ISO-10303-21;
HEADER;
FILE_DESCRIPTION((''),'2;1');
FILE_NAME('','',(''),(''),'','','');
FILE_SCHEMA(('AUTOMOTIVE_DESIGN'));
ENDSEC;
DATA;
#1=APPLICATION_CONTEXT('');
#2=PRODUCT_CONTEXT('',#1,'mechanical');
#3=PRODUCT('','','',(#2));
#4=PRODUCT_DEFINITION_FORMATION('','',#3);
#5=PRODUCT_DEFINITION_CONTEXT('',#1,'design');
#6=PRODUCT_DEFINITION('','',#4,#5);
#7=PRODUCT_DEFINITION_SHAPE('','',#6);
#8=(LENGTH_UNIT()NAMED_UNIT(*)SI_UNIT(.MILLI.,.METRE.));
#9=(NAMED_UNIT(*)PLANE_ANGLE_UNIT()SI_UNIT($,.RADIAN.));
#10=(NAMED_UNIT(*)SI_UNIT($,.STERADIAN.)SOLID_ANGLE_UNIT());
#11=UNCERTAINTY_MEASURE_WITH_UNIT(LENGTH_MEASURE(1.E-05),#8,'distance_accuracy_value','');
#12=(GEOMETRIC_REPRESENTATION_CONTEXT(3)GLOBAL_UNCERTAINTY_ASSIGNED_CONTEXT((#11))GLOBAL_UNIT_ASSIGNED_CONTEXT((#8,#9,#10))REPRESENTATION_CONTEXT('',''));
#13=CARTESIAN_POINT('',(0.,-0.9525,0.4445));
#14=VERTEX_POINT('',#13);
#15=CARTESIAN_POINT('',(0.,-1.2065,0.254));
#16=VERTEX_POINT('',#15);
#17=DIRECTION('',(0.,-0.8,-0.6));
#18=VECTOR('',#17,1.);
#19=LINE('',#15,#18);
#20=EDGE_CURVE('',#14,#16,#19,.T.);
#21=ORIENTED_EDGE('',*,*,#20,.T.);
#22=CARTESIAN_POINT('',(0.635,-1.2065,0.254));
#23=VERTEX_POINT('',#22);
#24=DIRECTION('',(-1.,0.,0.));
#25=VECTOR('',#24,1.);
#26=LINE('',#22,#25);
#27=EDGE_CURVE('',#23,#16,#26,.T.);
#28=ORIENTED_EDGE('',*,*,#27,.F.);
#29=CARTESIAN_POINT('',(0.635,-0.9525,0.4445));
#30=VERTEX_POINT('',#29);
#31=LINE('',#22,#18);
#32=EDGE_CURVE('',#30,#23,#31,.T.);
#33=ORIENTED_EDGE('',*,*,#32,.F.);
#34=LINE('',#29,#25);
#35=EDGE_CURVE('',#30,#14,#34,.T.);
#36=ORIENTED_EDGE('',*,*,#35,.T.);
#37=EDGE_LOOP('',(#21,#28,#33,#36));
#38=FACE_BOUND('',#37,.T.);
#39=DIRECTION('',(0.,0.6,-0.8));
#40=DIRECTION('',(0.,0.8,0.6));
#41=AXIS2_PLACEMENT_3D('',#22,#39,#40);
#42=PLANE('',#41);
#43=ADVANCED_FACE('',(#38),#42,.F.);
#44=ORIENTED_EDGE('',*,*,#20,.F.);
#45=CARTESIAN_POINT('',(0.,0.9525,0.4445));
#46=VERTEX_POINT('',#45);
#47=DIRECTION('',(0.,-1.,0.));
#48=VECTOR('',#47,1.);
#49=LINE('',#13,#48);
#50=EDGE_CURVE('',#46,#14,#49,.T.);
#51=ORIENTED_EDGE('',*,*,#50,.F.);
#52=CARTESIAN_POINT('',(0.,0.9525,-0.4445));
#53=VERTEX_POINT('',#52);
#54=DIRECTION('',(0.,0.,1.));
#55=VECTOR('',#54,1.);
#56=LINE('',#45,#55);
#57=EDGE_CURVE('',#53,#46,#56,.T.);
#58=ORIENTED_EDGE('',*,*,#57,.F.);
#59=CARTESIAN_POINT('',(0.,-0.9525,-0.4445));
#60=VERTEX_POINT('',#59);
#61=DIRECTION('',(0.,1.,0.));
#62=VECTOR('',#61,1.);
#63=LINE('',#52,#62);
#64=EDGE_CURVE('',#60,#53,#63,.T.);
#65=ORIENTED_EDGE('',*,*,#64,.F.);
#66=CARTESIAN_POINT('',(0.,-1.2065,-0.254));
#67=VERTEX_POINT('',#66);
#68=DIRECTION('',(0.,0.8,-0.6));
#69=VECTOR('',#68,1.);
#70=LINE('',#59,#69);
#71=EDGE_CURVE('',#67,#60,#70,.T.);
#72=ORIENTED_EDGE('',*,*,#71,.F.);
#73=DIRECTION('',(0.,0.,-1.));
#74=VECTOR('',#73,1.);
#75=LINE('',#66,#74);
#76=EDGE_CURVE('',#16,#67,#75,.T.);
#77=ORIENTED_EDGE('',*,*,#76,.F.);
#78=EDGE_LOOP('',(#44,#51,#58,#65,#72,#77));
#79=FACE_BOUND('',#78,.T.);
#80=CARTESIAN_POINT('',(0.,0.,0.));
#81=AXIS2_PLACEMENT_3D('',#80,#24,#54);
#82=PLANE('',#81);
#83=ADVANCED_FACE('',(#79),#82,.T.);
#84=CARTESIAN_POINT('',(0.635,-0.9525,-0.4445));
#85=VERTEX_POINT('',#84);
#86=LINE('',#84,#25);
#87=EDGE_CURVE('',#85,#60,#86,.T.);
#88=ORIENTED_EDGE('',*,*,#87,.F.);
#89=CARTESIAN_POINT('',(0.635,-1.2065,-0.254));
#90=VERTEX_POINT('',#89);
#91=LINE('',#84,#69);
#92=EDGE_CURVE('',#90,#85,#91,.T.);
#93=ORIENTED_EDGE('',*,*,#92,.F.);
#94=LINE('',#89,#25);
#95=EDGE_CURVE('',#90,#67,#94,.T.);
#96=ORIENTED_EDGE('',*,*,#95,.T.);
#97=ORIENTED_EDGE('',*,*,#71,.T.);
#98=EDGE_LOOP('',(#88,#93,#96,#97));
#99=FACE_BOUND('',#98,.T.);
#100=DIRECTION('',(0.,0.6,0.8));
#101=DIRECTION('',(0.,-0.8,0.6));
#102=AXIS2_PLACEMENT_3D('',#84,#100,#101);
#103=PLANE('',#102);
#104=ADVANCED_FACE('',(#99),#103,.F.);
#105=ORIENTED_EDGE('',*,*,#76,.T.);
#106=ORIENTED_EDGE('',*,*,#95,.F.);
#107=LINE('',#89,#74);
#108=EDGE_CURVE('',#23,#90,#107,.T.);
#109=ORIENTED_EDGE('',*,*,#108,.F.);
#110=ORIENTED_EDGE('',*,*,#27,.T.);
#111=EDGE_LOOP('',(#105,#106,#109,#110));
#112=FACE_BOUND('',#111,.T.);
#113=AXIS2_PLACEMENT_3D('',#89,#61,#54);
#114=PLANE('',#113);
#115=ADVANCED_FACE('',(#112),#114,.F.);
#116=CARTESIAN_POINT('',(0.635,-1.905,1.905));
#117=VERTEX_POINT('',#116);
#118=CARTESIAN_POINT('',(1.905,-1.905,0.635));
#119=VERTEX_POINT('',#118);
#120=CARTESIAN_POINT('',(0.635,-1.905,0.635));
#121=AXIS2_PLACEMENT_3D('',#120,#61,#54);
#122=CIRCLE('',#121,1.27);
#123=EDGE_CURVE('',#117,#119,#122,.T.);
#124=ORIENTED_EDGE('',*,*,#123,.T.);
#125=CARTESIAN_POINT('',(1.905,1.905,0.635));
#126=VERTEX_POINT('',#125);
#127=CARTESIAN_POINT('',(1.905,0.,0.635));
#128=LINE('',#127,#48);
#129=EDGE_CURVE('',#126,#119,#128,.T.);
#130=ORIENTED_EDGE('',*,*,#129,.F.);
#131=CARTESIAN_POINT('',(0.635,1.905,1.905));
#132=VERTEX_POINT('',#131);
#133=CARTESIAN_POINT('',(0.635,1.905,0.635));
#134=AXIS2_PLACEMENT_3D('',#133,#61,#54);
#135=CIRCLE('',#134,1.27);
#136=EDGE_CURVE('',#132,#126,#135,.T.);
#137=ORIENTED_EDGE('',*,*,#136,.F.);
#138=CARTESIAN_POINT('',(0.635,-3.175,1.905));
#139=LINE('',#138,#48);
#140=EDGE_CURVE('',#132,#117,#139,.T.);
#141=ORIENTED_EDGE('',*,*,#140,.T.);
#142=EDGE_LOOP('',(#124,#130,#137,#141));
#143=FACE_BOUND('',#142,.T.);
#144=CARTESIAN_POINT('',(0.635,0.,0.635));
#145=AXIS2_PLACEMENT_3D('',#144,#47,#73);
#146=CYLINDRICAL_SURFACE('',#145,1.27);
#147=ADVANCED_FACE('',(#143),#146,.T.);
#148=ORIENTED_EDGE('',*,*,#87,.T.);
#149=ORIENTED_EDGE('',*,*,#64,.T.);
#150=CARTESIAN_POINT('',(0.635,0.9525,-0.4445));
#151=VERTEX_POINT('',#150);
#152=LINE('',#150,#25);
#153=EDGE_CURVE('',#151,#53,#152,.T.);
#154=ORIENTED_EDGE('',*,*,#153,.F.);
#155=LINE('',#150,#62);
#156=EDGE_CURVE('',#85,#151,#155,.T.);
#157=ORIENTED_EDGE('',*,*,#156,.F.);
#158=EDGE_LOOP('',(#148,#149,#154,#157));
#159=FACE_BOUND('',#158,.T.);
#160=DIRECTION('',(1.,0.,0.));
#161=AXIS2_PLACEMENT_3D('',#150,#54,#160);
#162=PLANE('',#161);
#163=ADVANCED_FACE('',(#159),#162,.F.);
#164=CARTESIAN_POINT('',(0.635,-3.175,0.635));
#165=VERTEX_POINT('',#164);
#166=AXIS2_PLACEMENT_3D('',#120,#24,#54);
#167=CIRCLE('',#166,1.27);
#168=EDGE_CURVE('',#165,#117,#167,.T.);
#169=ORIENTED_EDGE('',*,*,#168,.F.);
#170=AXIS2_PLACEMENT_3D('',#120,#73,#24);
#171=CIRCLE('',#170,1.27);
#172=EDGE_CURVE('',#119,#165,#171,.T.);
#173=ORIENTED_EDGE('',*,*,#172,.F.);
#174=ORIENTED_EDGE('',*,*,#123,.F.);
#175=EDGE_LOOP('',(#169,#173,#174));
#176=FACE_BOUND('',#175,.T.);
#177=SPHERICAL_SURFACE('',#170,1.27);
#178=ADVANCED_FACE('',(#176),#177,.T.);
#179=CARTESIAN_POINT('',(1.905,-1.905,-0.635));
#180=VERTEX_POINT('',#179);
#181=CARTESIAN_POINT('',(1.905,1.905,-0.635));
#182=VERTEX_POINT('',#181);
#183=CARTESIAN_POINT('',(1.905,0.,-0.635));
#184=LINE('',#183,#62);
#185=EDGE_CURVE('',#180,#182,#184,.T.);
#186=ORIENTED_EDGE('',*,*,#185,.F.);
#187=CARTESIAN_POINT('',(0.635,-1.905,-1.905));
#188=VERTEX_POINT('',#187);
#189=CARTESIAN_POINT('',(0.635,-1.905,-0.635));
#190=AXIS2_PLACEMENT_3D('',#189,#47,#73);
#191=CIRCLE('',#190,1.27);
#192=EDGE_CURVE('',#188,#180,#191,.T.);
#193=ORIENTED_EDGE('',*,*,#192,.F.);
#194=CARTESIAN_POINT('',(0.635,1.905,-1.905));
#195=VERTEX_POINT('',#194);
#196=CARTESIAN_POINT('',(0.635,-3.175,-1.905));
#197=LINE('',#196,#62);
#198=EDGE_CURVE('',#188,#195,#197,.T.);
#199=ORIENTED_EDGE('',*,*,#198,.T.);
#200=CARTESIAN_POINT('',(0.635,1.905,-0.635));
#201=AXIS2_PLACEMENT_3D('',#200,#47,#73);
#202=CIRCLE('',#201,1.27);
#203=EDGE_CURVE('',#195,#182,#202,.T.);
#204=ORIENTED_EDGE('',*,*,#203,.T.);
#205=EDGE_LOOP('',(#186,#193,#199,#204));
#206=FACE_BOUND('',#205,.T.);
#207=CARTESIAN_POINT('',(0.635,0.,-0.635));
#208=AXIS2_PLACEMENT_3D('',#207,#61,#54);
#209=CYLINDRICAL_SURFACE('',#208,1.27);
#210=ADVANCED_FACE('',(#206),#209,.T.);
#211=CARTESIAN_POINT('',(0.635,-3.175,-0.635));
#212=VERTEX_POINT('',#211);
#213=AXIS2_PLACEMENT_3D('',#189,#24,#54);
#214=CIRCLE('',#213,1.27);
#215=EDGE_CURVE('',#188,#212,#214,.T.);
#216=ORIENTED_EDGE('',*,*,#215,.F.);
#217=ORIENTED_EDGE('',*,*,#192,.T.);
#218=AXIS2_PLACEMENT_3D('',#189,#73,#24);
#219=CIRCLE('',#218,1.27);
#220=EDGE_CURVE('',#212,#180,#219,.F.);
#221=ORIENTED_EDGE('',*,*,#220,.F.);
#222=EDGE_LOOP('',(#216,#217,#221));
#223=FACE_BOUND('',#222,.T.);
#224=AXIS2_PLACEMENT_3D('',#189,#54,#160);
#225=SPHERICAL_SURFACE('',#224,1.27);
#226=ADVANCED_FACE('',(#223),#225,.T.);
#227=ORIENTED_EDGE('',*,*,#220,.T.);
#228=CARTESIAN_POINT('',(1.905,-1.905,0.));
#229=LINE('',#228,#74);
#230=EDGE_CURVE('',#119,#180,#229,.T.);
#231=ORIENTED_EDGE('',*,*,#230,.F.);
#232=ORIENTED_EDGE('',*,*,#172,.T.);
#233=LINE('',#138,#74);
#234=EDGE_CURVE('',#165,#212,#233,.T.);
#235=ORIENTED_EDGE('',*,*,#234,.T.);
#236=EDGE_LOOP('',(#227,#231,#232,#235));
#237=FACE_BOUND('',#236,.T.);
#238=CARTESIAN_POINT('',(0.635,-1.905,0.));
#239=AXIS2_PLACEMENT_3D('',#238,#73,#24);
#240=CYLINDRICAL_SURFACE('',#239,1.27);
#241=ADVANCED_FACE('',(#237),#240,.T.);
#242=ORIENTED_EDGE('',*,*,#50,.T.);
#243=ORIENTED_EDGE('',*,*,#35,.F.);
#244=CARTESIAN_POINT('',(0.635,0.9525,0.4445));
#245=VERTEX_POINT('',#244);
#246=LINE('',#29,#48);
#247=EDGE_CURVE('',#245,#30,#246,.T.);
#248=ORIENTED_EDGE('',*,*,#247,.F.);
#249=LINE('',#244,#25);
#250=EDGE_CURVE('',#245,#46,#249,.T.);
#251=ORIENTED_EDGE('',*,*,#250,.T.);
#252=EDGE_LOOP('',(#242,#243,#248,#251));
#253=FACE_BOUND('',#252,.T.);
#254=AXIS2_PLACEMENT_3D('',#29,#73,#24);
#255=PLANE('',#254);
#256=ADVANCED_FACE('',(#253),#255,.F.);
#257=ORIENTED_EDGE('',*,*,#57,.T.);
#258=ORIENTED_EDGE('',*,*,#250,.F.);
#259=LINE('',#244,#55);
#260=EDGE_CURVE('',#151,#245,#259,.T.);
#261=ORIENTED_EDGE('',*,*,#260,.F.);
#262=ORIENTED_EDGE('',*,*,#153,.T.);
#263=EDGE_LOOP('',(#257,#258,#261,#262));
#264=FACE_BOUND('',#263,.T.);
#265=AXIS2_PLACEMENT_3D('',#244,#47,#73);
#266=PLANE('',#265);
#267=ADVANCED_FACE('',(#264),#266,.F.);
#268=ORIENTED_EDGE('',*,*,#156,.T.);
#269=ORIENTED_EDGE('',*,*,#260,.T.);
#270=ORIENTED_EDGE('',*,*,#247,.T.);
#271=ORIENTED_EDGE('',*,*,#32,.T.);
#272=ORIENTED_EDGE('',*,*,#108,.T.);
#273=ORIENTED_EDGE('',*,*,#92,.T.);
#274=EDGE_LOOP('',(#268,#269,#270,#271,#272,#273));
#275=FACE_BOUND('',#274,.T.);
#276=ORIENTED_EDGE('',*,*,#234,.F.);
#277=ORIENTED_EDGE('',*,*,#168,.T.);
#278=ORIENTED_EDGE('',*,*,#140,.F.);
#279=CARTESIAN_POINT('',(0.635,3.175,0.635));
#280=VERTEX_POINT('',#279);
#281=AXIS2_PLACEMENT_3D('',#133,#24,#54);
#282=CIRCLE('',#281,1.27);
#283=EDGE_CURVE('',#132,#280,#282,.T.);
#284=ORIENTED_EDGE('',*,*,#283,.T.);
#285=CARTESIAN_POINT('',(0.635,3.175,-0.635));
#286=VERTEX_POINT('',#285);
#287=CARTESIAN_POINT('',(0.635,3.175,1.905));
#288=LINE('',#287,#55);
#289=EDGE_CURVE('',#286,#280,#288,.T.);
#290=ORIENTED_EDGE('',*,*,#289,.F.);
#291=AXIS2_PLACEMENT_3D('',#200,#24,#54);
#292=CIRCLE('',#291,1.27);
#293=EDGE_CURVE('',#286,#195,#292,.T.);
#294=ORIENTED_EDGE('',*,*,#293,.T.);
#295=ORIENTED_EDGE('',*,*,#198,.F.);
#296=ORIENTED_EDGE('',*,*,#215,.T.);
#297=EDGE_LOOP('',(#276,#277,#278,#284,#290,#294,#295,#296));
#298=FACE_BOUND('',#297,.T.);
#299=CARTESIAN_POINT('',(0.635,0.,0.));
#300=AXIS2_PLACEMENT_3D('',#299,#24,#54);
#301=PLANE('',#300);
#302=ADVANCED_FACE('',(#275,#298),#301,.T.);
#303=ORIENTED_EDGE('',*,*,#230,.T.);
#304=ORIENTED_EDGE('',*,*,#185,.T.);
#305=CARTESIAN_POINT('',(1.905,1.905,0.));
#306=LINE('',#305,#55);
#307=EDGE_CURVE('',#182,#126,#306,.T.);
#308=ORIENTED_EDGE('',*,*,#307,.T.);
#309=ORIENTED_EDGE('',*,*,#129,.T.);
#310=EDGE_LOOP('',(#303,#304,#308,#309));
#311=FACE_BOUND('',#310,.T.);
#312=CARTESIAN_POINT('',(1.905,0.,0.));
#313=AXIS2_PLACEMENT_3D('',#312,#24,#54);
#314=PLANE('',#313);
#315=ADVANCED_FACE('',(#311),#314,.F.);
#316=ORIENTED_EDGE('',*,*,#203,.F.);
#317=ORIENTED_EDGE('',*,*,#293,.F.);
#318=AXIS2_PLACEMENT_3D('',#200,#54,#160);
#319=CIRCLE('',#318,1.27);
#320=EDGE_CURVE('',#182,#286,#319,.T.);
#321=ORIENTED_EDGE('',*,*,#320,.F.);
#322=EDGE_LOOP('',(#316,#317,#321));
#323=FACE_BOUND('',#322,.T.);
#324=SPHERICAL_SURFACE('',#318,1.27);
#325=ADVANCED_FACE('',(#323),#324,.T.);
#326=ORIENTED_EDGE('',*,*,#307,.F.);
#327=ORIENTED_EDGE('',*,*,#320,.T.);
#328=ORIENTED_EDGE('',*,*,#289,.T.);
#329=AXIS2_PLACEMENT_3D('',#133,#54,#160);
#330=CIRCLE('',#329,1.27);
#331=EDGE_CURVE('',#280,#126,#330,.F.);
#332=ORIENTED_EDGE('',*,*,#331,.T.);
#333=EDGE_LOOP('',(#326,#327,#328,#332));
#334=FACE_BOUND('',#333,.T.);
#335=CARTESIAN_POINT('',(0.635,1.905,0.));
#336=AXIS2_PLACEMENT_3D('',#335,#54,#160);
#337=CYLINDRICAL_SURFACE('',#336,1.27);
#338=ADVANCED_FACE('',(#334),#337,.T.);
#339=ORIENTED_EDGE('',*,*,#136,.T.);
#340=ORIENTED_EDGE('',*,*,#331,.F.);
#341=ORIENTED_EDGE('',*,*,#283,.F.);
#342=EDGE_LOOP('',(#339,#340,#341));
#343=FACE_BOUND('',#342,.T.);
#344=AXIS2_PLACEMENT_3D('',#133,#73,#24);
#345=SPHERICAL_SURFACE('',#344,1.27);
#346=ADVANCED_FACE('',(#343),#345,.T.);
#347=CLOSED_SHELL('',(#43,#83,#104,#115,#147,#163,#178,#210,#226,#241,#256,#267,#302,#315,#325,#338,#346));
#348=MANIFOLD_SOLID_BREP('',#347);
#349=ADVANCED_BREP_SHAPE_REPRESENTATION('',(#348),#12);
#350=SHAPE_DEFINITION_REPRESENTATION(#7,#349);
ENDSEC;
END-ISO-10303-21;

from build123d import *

# Parameters (mm, degrees)
BOSS_EXTRUDE1_DEPTH = 0.635
SKETCH2_W           = 3.81
SKETCH2_H           = 6.35
BOSS_EXTRUDE2_DEPTH = 1.27
FILLET4_R           = 1.27
FILLET5_R           = 1.27


with BuildPart() as part:
    # Sketch1 → Boss-Extrude1 (new body)
    with BuildSketch(Plane(origin=(0, 0, 0), x_dir=(0, 0, -1), z_dir=(1, 0, 0))):
        Polygon((-0.4445, 0.9525), (0.4445, 0.9525), (0.4445, -0.9525), (0.254, -1.2065), (-0.254, -1.2065), (-0.4445, -0.9525), align=None)
    extrude(amount=BOSS_EXTRUDE1_DEPTH)

    # Sketch2 → Boss-Extrude2 (add)
    with BuildSketch(Plane(origin=(0.635, 0, 0), x_dir=(0, 0, -1), z_dir=(1, 0, 0))):
        Rectangle(SKETCH2_W, SKETCH2_H)
    extrude(amount=BOSS_EXTRUDE2_DEPTH)

    # Fillet4
    fillet4_edges = [part.edges().sort_by_distance(p)[0] for p in [
        (1.905, -3.175, 0),
        (1.905, 3.175, 0),
    ]]
    fillet(fillet4_edges, radius=FILLET4_R - 0.0001)  # a hair under: the kernel refuses the full size

    # Fillet5
    fillet5_edges = [part.edges().sort_by_distance(p)[0] for p in [
        (1.905, 0, -1.905),
        (1.905, 0, 1.905),
        (1.533054901, 2.803054901, -1.905),
        (1.533054901, -2.803054901, -1.905),
        (1.533054901, 2.803054901, 1.905),
        (1.533054901, -2.803054901, 1.905),
    ]]
    fillet(fillet5_edges, radius=FILLET5_R - 0.0001)  # a hair under: the kernel refuses the full size


solid = part.part
